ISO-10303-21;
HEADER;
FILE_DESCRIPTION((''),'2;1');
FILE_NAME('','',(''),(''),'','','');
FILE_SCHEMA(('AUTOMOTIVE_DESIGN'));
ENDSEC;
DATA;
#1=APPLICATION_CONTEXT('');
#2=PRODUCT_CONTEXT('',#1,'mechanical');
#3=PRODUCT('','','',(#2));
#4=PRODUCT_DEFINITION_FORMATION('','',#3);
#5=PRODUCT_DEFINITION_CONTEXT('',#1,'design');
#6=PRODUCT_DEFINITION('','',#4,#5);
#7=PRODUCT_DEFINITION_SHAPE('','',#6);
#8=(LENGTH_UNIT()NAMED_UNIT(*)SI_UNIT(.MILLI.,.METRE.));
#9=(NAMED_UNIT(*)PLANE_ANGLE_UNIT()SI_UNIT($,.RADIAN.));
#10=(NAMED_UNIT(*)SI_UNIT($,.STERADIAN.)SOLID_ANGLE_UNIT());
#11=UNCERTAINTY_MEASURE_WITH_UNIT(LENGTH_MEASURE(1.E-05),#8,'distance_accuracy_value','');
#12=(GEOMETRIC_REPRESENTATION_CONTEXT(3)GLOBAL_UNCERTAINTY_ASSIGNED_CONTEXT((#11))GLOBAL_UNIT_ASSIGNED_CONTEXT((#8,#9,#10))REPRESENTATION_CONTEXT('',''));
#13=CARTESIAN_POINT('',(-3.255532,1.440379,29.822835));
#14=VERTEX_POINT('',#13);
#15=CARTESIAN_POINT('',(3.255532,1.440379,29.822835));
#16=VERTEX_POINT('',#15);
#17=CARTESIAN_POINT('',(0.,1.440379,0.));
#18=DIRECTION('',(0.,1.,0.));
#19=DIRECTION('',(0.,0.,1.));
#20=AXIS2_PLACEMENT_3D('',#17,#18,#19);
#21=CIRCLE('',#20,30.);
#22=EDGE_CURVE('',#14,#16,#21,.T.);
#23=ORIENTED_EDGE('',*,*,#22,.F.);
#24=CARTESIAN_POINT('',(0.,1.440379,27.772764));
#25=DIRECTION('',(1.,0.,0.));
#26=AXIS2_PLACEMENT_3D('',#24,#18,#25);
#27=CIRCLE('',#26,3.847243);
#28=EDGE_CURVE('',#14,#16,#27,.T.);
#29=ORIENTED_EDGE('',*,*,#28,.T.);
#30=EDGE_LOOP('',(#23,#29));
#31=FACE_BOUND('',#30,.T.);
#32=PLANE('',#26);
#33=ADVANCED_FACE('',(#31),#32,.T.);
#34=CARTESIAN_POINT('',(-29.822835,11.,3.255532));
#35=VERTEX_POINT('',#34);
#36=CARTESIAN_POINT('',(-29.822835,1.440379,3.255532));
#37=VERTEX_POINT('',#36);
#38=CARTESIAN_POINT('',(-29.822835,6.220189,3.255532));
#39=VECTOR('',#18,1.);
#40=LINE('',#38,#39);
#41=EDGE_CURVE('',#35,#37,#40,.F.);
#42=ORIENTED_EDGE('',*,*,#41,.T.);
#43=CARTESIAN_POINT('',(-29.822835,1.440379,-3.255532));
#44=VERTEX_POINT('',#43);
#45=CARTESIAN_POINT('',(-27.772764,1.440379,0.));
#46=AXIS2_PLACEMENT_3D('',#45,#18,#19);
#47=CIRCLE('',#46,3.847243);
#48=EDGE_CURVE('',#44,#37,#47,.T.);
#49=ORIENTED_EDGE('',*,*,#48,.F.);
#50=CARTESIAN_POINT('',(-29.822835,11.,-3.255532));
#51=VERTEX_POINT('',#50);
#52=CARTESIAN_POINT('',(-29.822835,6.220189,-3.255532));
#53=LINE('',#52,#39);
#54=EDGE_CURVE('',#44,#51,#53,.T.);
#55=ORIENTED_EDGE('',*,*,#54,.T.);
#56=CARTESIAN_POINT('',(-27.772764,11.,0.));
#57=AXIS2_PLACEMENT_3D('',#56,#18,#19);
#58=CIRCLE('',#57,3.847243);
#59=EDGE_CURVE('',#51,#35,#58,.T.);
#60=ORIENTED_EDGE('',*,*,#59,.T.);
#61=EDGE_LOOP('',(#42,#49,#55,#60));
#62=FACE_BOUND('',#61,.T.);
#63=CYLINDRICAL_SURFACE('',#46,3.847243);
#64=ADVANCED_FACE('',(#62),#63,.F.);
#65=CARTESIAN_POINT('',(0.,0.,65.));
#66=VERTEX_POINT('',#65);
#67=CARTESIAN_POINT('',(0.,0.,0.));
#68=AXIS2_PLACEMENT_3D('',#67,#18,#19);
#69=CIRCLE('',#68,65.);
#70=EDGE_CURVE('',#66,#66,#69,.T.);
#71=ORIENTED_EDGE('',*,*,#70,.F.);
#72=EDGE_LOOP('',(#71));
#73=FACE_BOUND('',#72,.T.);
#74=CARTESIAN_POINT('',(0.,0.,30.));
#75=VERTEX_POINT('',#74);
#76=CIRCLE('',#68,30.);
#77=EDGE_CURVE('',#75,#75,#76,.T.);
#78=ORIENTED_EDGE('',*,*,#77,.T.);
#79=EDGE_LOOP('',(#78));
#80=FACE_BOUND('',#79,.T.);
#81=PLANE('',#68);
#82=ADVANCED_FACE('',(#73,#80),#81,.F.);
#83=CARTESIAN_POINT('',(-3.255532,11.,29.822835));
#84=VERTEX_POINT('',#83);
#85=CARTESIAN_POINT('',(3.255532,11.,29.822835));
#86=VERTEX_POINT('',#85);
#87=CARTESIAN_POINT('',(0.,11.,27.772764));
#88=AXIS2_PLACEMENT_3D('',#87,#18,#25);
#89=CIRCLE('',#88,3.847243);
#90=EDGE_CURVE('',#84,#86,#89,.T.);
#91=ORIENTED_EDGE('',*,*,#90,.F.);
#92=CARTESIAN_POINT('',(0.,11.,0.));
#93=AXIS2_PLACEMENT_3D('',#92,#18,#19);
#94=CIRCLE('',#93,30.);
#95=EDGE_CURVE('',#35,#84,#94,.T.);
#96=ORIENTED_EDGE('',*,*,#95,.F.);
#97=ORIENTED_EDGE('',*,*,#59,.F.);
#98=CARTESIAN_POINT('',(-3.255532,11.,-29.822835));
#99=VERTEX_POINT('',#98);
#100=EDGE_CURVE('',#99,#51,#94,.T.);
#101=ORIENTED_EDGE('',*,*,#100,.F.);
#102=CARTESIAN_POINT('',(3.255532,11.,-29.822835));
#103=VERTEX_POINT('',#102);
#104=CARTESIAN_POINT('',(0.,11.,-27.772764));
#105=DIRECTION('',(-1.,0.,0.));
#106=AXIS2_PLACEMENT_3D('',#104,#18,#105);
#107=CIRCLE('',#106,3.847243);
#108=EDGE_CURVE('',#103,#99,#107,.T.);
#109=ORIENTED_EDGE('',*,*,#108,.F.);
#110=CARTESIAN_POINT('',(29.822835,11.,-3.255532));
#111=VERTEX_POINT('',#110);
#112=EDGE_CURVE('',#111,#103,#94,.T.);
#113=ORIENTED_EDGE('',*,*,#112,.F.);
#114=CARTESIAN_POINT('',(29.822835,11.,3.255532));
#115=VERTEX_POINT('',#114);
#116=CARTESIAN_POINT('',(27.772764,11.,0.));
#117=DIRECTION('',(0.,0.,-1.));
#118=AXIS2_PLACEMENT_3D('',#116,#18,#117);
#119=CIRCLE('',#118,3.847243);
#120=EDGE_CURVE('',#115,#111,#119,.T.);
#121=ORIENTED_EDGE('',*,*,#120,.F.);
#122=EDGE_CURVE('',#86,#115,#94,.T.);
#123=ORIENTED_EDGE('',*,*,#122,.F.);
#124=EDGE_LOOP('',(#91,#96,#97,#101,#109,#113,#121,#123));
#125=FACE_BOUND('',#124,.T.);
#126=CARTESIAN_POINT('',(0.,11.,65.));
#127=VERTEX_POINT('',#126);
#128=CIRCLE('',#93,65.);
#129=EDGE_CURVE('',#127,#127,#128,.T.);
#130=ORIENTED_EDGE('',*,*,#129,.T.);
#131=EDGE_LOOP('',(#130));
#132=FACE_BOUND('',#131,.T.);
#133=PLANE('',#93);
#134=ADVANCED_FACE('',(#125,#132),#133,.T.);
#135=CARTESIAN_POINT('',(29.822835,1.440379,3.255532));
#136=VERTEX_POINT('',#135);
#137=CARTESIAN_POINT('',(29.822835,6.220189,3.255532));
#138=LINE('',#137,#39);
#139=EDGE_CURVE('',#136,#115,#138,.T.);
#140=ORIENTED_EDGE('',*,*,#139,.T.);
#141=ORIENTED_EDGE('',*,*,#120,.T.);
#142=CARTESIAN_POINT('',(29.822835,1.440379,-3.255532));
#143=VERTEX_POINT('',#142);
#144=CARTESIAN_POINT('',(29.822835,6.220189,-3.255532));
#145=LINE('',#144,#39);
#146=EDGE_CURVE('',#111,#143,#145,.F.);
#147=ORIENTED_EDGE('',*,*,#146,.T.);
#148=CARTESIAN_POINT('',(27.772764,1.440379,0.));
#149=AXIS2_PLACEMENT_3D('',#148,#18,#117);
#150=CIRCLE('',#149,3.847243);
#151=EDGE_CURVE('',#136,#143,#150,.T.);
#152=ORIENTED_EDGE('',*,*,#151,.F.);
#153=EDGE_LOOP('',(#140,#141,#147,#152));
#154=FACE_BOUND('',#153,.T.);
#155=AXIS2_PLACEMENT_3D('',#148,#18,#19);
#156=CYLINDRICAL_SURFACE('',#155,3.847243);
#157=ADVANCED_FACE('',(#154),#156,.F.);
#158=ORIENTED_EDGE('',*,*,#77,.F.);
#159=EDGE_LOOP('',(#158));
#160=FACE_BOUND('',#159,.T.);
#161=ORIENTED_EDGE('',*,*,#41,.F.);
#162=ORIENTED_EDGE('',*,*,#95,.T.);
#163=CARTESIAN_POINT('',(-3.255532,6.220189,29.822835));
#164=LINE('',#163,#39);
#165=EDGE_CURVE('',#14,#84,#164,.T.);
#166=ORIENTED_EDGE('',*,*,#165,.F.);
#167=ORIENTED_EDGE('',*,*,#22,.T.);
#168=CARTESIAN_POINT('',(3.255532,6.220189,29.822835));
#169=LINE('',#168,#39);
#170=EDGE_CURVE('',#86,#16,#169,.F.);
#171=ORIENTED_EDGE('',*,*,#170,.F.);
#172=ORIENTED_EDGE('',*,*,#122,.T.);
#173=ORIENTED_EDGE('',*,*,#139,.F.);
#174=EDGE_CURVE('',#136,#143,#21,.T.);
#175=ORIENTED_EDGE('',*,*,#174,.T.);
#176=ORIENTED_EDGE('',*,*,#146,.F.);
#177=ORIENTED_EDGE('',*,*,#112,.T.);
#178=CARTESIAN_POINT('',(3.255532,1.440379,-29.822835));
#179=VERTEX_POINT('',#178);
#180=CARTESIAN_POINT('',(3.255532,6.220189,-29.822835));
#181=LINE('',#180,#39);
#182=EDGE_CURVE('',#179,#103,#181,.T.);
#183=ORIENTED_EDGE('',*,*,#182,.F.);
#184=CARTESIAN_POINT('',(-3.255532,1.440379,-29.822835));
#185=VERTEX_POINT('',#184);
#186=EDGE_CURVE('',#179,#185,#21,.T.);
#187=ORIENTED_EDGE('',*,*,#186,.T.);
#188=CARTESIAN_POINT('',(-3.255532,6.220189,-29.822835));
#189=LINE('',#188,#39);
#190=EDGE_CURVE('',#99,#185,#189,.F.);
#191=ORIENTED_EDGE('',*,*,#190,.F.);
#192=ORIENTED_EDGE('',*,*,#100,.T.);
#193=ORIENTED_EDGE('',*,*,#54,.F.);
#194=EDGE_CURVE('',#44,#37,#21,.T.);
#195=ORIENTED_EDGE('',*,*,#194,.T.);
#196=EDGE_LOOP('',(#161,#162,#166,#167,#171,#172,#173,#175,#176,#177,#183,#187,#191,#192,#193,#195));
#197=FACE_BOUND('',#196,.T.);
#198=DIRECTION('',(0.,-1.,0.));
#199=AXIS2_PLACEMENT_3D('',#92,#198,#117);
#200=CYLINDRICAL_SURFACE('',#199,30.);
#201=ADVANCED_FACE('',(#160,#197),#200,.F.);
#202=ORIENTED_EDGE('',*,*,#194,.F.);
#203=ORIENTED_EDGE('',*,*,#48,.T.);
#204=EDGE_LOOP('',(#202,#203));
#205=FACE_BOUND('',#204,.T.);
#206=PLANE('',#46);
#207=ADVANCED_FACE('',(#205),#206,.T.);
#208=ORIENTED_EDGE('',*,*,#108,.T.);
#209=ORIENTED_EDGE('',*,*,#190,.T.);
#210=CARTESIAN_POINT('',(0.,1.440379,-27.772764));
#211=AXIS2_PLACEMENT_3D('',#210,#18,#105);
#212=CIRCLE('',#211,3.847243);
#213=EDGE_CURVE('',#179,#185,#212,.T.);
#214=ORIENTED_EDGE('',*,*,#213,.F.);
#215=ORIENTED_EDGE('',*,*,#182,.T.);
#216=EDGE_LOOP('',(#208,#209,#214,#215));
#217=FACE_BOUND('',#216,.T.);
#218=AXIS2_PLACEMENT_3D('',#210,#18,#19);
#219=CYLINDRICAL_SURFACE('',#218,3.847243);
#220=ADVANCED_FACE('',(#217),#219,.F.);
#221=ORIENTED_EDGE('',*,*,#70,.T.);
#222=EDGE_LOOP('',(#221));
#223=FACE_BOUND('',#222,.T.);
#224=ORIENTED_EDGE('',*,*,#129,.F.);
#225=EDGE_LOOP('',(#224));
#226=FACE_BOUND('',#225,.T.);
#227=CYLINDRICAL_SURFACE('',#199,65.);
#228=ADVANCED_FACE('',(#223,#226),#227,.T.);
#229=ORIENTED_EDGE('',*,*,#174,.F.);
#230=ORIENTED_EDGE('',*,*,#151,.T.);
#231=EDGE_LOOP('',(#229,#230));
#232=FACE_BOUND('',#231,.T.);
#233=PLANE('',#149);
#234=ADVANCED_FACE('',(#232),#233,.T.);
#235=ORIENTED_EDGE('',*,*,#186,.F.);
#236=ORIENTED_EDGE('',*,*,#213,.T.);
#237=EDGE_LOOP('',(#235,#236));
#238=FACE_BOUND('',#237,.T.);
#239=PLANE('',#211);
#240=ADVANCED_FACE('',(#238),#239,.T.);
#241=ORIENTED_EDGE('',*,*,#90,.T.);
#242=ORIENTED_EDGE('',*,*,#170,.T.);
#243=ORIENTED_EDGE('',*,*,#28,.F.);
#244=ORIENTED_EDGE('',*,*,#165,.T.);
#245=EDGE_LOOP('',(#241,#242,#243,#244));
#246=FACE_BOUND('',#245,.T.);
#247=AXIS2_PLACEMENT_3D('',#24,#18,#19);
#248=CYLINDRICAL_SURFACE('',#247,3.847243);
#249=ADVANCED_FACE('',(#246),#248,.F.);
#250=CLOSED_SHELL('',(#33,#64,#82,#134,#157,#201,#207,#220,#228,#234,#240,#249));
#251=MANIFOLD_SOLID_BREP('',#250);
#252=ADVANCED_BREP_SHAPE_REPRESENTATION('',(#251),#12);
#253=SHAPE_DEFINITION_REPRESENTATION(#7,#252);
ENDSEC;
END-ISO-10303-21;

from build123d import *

# Parameters (mm, degrees)
SKETCH1_R           = 65
BOSS_EXTRUDE1_DEPTH = 11
SKETCH2_R           = 30
CUT_EXTRUDE1_DEPTH  = 93.579695398
SKETCH3_R           = 3.84724295
CUT_EXTRUDE2_DEPTH  = 9.559621371
CIRPATTERN1_COUNT   = 4


with BuildPart() as part:
    # Sketch1 → Boss-Extrude1 (new body)
    with BuildSketch(Plane(origin=(0, 0, 0), x_dir=(1, 0, 0), z_dir=(0, 1, 0))):
        Circle(SKETCH1_R)
    extrude(amount=BOSS_EXTRUDE1_DEPTH)

    # Sketch2 → Cut-Extrude1 (cut, through all)
    with BuildSketch(Plane(origin=(0, 0, 0), x_dir=(1, 0, 0), z_dir=(0, 1, 0))):
        Circle(SKETCH2_R)
    extrude(amount=CUT_EXTRUDE1_DEPTH, mode=Mode.SUBTRACT)

    # Sketch3 → Cut-Extrude2 (cut)
    with BuildSketch(Plane(origin=(0, 11, 0), x_dir=(1, 0, 0), z_dir=(0, 1, 0))):
        with Locations((-27.77276409, 0)):
            Circle(SKETCH3_R)
    cut_extrude2 = extrude(amount=-CUT_EXTRUDE2_DEPTH, mode=Mode.SUBTRACT)

    # CirPattern1: Cut-Extrude2 ×4 about axis
    cirpattern1_axis = Axis((0, 0, 0), (0, 1, 0))
    for i in range(1, CIRPATTERN1_COUNT):
        add(cut_extrude2.rotate(cirpattern1_axis, i * 360 / CIRPATTERN1_COUNT), mode=Mode.SUBTRACT)


solid = part.part
